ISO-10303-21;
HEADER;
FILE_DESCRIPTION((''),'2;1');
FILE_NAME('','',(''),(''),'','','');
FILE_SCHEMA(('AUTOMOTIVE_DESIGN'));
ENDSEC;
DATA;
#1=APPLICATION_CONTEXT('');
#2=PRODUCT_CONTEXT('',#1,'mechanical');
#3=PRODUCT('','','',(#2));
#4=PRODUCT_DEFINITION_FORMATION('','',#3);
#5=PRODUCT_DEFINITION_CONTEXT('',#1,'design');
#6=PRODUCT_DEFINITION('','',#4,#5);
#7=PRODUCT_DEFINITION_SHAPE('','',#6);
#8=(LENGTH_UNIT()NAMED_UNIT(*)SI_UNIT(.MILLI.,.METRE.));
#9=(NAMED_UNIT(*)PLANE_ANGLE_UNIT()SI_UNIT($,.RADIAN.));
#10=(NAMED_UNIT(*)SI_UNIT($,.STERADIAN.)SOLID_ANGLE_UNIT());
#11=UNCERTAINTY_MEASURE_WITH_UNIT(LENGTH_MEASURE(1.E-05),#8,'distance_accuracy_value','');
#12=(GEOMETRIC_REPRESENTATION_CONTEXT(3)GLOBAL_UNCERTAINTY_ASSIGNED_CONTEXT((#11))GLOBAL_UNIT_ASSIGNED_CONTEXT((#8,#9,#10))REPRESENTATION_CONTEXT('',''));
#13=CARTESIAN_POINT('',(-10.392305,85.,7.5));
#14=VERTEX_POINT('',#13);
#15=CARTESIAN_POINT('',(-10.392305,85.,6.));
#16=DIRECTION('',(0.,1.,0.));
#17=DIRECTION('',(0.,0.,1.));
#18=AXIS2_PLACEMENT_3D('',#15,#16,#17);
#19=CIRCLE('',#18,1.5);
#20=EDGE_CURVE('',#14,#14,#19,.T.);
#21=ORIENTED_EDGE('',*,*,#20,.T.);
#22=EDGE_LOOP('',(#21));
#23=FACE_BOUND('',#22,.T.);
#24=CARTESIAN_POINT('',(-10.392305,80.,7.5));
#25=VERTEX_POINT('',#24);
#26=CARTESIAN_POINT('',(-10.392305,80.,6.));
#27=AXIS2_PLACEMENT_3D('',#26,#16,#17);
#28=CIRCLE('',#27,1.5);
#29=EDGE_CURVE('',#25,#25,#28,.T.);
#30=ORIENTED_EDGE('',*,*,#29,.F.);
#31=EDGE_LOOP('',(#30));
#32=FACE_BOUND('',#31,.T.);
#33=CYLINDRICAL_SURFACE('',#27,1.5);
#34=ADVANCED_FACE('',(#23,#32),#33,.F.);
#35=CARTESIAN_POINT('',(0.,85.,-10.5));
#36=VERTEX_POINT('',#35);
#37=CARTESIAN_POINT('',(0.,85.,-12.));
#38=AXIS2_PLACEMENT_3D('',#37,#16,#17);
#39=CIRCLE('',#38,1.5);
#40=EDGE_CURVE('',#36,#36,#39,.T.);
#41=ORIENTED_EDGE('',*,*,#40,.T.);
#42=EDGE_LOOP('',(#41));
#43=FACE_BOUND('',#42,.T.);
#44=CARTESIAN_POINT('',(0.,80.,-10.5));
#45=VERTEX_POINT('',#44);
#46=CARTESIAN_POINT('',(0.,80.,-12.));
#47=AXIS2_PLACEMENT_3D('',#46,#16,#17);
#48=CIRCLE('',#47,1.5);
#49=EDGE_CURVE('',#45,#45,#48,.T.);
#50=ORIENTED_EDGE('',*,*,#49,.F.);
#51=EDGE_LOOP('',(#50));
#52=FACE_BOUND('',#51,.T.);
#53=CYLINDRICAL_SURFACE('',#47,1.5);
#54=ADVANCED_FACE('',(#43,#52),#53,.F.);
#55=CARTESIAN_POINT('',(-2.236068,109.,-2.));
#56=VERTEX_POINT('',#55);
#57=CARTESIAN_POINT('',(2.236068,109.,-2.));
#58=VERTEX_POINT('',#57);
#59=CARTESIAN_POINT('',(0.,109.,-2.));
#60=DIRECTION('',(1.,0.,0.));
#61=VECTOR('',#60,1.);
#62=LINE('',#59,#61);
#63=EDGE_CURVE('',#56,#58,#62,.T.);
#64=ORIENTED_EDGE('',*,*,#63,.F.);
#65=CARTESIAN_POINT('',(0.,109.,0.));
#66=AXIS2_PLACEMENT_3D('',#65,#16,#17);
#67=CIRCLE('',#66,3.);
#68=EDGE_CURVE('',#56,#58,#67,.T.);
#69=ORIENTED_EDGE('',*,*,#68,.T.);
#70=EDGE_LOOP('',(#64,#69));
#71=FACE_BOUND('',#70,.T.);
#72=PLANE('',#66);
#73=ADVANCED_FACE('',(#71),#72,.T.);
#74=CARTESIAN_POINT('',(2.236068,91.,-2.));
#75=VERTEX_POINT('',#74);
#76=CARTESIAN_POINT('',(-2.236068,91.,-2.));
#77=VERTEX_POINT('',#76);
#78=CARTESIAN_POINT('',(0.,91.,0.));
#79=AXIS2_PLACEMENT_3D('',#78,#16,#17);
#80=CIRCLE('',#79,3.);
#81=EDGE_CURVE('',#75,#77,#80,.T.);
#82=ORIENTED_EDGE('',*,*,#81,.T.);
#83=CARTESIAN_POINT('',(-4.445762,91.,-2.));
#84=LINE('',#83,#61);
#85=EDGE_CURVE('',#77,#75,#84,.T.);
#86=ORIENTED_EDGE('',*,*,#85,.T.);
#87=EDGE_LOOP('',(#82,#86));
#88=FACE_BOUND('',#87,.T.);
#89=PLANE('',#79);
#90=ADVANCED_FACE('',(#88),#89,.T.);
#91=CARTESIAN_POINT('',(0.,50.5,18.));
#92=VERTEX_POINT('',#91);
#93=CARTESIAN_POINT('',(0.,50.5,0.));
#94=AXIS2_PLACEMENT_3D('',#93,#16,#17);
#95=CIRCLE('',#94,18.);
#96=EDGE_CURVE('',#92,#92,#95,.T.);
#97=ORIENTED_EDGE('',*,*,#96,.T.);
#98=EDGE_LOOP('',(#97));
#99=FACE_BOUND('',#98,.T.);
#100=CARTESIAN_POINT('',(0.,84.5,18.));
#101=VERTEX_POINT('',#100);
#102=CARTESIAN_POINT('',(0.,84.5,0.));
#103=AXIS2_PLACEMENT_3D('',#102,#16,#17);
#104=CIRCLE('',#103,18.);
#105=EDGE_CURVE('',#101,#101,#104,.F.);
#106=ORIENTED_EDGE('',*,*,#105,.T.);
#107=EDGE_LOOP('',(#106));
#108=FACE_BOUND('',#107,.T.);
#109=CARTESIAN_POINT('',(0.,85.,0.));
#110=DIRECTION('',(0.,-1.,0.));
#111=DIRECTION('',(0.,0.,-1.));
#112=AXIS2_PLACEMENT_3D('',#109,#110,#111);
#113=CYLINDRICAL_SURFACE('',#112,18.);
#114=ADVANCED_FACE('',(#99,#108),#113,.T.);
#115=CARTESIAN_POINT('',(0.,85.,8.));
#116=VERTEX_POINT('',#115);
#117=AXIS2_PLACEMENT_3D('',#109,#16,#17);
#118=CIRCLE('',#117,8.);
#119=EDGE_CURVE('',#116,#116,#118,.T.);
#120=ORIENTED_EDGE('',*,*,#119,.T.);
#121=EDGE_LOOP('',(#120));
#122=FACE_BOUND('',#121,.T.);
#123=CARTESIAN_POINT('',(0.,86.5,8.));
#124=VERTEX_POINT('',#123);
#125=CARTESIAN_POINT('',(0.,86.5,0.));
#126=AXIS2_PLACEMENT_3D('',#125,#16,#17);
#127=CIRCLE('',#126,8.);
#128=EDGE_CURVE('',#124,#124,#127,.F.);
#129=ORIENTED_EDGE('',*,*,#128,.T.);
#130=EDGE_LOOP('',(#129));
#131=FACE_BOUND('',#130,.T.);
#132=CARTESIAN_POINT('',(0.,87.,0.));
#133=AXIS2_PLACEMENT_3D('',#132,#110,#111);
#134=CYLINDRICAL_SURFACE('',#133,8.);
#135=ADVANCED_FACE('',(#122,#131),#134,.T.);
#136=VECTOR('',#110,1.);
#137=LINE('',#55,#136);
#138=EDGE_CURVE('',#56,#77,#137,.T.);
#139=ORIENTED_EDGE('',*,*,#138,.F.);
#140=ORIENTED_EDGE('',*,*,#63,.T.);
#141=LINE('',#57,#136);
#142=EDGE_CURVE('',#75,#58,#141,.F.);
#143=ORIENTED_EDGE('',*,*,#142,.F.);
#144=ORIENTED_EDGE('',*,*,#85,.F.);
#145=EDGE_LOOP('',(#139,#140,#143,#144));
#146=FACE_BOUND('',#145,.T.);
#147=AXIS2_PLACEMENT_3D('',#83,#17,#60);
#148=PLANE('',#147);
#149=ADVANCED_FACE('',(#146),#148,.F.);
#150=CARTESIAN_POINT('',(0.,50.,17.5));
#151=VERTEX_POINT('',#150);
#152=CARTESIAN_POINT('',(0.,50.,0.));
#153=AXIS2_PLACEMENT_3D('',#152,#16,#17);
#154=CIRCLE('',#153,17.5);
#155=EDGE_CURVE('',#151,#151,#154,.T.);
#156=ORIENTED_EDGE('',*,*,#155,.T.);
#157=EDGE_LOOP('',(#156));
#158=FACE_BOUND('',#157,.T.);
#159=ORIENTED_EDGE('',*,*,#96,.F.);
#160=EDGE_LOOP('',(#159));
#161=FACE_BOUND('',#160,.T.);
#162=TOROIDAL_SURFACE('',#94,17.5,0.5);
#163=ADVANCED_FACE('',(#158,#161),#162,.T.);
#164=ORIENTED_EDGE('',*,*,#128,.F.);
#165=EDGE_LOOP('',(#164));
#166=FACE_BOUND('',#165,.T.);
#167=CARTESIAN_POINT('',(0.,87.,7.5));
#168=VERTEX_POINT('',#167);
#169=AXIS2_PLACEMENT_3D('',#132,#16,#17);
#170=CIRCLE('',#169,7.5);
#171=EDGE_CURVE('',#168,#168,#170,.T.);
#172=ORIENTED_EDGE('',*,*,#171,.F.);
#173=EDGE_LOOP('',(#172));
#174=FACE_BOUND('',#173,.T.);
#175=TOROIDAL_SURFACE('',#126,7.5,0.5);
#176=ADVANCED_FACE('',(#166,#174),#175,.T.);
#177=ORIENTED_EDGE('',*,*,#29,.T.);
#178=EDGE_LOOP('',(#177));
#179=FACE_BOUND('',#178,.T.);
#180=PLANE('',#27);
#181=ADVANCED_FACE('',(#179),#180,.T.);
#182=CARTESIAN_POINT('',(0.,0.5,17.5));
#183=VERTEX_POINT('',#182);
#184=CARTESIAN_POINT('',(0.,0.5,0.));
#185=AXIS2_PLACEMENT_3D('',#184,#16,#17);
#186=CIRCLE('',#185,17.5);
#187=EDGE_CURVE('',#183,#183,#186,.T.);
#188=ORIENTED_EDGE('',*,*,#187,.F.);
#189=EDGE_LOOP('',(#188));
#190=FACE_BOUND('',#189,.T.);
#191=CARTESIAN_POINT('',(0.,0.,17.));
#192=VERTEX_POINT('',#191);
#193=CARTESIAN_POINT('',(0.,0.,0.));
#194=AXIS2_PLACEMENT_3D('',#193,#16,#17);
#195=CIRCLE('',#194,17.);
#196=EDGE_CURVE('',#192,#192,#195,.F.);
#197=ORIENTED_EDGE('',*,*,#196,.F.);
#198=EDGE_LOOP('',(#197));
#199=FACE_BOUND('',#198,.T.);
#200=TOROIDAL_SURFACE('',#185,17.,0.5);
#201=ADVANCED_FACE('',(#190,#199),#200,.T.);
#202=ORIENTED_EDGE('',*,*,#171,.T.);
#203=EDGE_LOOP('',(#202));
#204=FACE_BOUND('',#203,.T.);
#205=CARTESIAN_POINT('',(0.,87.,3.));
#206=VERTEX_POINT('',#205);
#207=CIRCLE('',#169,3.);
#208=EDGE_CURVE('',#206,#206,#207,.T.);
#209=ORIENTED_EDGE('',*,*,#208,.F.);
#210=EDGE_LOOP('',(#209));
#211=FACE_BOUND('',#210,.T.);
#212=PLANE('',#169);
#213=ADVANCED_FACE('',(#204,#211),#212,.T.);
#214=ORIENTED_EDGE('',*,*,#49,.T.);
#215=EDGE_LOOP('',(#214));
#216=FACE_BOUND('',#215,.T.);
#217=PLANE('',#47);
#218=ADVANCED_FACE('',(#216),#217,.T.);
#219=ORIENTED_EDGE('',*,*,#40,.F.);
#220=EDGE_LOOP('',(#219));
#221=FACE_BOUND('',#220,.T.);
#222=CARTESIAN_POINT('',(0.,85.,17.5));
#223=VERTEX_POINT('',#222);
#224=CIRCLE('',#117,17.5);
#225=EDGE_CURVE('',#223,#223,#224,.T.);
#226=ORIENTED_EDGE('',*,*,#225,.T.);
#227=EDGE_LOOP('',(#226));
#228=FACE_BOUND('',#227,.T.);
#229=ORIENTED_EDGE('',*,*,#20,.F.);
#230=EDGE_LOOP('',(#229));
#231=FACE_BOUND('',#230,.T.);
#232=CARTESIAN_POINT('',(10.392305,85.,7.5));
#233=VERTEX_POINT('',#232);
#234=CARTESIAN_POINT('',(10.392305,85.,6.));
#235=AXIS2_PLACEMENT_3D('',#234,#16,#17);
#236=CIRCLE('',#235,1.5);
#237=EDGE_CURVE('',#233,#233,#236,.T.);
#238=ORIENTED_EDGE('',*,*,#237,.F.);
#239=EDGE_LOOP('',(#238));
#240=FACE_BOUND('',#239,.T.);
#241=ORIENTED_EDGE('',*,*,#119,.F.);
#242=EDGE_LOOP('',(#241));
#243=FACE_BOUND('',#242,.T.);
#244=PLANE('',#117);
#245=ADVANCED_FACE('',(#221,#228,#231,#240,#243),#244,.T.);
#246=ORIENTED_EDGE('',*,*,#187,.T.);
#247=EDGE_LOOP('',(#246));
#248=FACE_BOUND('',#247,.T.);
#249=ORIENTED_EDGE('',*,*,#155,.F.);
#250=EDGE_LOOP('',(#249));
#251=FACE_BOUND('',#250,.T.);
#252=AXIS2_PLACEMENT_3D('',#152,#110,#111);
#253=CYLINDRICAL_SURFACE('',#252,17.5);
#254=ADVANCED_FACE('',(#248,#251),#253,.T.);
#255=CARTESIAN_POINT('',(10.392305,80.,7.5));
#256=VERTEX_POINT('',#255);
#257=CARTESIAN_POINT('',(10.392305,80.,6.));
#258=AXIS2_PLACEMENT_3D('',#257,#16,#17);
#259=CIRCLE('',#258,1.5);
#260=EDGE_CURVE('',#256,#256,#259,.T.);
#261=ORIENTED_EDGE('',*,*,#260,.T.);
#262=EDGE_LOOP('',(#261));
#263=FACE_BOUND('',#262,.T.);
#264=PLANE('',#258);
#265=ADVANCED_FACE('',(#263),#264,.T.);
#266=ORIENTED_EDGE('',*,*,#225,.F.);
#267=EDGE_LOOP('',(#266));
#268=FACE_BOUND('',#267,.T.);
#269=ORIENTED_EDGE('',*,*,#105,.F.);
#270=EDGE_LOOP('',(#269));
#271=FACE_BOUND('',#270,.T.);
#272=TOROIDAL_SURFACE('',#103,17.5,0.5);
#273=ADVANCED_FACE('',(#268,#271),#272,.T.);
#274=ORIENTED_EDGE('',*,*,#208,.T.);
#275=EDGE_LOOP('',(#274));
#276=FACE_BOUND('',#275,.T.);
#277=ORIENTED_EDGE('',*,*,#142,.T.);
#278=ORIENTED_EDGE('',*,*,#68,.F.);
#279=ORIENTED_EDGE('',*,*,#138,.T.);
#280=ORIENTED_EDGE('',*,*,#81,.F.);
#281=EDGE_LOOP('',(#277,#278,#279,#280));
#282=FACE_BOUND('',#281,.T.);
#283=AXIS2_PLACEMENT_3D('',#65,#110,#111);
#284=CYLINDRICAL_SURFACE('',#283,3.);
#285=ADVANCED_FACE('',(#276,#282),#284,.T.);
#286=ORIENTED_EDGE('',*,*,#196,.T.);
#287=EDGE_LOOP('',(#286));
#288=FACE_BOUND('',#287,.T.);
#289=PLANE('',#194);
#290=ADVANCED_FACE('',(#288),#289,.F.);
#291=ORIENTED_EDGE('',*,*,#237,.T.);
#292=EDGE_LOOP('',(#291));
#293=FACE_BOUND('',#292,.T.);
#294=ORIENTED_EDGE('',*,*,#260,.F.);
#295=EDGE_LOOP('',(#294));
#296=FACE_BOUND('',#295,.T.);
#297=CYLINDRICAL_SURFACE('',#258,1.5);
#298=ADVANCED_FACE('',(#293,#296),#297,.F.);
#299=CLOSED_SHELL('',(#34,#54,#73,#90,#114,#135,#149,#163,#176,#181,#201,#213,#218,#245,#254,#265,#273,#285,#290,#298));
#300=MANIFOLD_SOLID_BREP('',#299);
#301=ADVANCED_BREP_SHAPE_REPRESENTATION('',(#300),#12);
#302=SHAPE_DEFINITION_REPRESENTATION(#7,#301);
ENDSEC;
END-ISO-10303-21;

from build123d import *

# Parameters (mm, degrees)
SKETCH_1_R          = 17.5
EXTRUDE_1_DEPTH     = 50
SKETCH_3_R          = 18
EXTRUDE_4_DEPTH     = 35
SKETCH_4_R          = 8
EXTRUDE_5_DEPTH     = 2
SKETCH_5_R          = 3
EXTRUDE_6_DEPTH     = 22
SKETCH_6_R          = 1.5
CUT_EXTRUDE_1_DEPTH = 5
SKETCH_7_W          = 8.061647896
SKETCH_7_H          = 1.71902786
CUT_EXTRUDE_2_DEPTH = 18
FILLET_10_R         = 0.5
FILLET_11_R         = 0.5
FILLET_12_R         = 0.5
FILLET_13_R         = 0.5


with BuildPart() as part:
    # 草图1 → 凸台-拉伸1 (new body)
    with BuildSketch(Plane(origin=(0, 0, 0), x_dir=(1, 0, 0), z_dir=(0, 1, 0))):
        with Locations(Location((0, 0, 0), (0, 0, 270))):
            Circle(SKETCH_1_R)
    extrude(amount=EXTRUDE_1_DEPTH)

    # 草图3 → 凸台-拉伸4 (add)
    with BuildSketch(Plane(origin=(0, 50, 0), x_dir=(1, 0, 0), z_dir=(0, 1, 0))):
        with Locations(Location((0, 0, 0), (0, 0, 270))):
            Circle(SKETCH_3_R)
    extrude(amount=EXTRUDE_4_DEPTH)

    # 草图4 → 凸台-拉伸5 (add)
    with BuildSketch(Plane(origin=(0, 85, 0), x_dir=(1, 0, 0), z_dir=(0, 1, 0))):
        with Locations(Location((0, 0, 0), (0, 0, 270))):
            Circle(SKETCH_4_R)
    extrude(amount=EXTRUDE_5_DEPTH)

    # 草图5 → 凸台-拉伸6 (add)
    with BuildSketch(Plane(origin=(0, 87, 0), x_dir=(1, 0, 0), z_dir=(0, 1, 0))):
        with Locations(Location((0, 0, 0), (0, 0, 270))):
            Circle(SKETCH_5_R)
    extrude(amount=EXTRUDE_6_DEPTH)

    # 草图6 → 切除-拉伸1 (cut)
    with BuildSketch(Plane(origin=(0, 85, 0), x_dir=(1, 0, 0), z_dir=(0, 1, 0))):
        with Locations(Location((0, 12, 0), (0, 0, 270))):
            Circle(SKETCH_6_R)
        with Locations(Location((10.392304845, -6, 0), (0, 0, 270))):
            Circle(SKETCH_6_R)
        with Locations(Location((-10.392304845, -6, 0), (0, 0, 270))):
            Circle(SKETCH_6_R)
    extrude(amount=-CUT_EXTRUDE_1_DEPTH, mode=Mode.SUBTRACT)

    # 草图7 → 切除-拉伸2 (cut)
    with BuildSketch(Plane(origin=(0, 109, 0), x_dir=(1, 0, 0), z_dir=(0, 1, 0))):
        with Locations((-0.414937759, 2.85951393)):
            Rectangle(SKETCH_7_W, SKETCH_7_H)
    extrude(amount=-CUT_EXTRUDE_2_DEPTH, mode=Mode.SUBTRACT)

    # 圆角10
    fillet_10_edges = [part.edges().sort_by_distance(p)[0] for p in [
        (0, 85, -18),
    ]]
    fillet(fillet_10_edges, radius=FILLET_10_R)

    # 圆角11
    fillet_11_edges = [part.edges().sort_by_distance(p)[0] for p in [
        (0, 50, -18),
    ]]
    fillet(fillet_11_edges, radius=FILLET_11_R - 0.0001)  # a hair under: the kernel refuses the full size

    # 圆角12
    fillet_12_edges = [part.edges().sort_by_distance(p)[0] for p in [
        (0, 0, -17.5),
    ]]
    fillet(fillet_12_edges, radius=FILLET_12_R)

    # 圆角13
    fillet_13_edges = [part.edges().sort_by_distance(p)[0] for p in [
        (0, 87, -8),
    ]]
    fillet(fillet_13_edges, radius=FILLET_13_R)


solid = part.part
